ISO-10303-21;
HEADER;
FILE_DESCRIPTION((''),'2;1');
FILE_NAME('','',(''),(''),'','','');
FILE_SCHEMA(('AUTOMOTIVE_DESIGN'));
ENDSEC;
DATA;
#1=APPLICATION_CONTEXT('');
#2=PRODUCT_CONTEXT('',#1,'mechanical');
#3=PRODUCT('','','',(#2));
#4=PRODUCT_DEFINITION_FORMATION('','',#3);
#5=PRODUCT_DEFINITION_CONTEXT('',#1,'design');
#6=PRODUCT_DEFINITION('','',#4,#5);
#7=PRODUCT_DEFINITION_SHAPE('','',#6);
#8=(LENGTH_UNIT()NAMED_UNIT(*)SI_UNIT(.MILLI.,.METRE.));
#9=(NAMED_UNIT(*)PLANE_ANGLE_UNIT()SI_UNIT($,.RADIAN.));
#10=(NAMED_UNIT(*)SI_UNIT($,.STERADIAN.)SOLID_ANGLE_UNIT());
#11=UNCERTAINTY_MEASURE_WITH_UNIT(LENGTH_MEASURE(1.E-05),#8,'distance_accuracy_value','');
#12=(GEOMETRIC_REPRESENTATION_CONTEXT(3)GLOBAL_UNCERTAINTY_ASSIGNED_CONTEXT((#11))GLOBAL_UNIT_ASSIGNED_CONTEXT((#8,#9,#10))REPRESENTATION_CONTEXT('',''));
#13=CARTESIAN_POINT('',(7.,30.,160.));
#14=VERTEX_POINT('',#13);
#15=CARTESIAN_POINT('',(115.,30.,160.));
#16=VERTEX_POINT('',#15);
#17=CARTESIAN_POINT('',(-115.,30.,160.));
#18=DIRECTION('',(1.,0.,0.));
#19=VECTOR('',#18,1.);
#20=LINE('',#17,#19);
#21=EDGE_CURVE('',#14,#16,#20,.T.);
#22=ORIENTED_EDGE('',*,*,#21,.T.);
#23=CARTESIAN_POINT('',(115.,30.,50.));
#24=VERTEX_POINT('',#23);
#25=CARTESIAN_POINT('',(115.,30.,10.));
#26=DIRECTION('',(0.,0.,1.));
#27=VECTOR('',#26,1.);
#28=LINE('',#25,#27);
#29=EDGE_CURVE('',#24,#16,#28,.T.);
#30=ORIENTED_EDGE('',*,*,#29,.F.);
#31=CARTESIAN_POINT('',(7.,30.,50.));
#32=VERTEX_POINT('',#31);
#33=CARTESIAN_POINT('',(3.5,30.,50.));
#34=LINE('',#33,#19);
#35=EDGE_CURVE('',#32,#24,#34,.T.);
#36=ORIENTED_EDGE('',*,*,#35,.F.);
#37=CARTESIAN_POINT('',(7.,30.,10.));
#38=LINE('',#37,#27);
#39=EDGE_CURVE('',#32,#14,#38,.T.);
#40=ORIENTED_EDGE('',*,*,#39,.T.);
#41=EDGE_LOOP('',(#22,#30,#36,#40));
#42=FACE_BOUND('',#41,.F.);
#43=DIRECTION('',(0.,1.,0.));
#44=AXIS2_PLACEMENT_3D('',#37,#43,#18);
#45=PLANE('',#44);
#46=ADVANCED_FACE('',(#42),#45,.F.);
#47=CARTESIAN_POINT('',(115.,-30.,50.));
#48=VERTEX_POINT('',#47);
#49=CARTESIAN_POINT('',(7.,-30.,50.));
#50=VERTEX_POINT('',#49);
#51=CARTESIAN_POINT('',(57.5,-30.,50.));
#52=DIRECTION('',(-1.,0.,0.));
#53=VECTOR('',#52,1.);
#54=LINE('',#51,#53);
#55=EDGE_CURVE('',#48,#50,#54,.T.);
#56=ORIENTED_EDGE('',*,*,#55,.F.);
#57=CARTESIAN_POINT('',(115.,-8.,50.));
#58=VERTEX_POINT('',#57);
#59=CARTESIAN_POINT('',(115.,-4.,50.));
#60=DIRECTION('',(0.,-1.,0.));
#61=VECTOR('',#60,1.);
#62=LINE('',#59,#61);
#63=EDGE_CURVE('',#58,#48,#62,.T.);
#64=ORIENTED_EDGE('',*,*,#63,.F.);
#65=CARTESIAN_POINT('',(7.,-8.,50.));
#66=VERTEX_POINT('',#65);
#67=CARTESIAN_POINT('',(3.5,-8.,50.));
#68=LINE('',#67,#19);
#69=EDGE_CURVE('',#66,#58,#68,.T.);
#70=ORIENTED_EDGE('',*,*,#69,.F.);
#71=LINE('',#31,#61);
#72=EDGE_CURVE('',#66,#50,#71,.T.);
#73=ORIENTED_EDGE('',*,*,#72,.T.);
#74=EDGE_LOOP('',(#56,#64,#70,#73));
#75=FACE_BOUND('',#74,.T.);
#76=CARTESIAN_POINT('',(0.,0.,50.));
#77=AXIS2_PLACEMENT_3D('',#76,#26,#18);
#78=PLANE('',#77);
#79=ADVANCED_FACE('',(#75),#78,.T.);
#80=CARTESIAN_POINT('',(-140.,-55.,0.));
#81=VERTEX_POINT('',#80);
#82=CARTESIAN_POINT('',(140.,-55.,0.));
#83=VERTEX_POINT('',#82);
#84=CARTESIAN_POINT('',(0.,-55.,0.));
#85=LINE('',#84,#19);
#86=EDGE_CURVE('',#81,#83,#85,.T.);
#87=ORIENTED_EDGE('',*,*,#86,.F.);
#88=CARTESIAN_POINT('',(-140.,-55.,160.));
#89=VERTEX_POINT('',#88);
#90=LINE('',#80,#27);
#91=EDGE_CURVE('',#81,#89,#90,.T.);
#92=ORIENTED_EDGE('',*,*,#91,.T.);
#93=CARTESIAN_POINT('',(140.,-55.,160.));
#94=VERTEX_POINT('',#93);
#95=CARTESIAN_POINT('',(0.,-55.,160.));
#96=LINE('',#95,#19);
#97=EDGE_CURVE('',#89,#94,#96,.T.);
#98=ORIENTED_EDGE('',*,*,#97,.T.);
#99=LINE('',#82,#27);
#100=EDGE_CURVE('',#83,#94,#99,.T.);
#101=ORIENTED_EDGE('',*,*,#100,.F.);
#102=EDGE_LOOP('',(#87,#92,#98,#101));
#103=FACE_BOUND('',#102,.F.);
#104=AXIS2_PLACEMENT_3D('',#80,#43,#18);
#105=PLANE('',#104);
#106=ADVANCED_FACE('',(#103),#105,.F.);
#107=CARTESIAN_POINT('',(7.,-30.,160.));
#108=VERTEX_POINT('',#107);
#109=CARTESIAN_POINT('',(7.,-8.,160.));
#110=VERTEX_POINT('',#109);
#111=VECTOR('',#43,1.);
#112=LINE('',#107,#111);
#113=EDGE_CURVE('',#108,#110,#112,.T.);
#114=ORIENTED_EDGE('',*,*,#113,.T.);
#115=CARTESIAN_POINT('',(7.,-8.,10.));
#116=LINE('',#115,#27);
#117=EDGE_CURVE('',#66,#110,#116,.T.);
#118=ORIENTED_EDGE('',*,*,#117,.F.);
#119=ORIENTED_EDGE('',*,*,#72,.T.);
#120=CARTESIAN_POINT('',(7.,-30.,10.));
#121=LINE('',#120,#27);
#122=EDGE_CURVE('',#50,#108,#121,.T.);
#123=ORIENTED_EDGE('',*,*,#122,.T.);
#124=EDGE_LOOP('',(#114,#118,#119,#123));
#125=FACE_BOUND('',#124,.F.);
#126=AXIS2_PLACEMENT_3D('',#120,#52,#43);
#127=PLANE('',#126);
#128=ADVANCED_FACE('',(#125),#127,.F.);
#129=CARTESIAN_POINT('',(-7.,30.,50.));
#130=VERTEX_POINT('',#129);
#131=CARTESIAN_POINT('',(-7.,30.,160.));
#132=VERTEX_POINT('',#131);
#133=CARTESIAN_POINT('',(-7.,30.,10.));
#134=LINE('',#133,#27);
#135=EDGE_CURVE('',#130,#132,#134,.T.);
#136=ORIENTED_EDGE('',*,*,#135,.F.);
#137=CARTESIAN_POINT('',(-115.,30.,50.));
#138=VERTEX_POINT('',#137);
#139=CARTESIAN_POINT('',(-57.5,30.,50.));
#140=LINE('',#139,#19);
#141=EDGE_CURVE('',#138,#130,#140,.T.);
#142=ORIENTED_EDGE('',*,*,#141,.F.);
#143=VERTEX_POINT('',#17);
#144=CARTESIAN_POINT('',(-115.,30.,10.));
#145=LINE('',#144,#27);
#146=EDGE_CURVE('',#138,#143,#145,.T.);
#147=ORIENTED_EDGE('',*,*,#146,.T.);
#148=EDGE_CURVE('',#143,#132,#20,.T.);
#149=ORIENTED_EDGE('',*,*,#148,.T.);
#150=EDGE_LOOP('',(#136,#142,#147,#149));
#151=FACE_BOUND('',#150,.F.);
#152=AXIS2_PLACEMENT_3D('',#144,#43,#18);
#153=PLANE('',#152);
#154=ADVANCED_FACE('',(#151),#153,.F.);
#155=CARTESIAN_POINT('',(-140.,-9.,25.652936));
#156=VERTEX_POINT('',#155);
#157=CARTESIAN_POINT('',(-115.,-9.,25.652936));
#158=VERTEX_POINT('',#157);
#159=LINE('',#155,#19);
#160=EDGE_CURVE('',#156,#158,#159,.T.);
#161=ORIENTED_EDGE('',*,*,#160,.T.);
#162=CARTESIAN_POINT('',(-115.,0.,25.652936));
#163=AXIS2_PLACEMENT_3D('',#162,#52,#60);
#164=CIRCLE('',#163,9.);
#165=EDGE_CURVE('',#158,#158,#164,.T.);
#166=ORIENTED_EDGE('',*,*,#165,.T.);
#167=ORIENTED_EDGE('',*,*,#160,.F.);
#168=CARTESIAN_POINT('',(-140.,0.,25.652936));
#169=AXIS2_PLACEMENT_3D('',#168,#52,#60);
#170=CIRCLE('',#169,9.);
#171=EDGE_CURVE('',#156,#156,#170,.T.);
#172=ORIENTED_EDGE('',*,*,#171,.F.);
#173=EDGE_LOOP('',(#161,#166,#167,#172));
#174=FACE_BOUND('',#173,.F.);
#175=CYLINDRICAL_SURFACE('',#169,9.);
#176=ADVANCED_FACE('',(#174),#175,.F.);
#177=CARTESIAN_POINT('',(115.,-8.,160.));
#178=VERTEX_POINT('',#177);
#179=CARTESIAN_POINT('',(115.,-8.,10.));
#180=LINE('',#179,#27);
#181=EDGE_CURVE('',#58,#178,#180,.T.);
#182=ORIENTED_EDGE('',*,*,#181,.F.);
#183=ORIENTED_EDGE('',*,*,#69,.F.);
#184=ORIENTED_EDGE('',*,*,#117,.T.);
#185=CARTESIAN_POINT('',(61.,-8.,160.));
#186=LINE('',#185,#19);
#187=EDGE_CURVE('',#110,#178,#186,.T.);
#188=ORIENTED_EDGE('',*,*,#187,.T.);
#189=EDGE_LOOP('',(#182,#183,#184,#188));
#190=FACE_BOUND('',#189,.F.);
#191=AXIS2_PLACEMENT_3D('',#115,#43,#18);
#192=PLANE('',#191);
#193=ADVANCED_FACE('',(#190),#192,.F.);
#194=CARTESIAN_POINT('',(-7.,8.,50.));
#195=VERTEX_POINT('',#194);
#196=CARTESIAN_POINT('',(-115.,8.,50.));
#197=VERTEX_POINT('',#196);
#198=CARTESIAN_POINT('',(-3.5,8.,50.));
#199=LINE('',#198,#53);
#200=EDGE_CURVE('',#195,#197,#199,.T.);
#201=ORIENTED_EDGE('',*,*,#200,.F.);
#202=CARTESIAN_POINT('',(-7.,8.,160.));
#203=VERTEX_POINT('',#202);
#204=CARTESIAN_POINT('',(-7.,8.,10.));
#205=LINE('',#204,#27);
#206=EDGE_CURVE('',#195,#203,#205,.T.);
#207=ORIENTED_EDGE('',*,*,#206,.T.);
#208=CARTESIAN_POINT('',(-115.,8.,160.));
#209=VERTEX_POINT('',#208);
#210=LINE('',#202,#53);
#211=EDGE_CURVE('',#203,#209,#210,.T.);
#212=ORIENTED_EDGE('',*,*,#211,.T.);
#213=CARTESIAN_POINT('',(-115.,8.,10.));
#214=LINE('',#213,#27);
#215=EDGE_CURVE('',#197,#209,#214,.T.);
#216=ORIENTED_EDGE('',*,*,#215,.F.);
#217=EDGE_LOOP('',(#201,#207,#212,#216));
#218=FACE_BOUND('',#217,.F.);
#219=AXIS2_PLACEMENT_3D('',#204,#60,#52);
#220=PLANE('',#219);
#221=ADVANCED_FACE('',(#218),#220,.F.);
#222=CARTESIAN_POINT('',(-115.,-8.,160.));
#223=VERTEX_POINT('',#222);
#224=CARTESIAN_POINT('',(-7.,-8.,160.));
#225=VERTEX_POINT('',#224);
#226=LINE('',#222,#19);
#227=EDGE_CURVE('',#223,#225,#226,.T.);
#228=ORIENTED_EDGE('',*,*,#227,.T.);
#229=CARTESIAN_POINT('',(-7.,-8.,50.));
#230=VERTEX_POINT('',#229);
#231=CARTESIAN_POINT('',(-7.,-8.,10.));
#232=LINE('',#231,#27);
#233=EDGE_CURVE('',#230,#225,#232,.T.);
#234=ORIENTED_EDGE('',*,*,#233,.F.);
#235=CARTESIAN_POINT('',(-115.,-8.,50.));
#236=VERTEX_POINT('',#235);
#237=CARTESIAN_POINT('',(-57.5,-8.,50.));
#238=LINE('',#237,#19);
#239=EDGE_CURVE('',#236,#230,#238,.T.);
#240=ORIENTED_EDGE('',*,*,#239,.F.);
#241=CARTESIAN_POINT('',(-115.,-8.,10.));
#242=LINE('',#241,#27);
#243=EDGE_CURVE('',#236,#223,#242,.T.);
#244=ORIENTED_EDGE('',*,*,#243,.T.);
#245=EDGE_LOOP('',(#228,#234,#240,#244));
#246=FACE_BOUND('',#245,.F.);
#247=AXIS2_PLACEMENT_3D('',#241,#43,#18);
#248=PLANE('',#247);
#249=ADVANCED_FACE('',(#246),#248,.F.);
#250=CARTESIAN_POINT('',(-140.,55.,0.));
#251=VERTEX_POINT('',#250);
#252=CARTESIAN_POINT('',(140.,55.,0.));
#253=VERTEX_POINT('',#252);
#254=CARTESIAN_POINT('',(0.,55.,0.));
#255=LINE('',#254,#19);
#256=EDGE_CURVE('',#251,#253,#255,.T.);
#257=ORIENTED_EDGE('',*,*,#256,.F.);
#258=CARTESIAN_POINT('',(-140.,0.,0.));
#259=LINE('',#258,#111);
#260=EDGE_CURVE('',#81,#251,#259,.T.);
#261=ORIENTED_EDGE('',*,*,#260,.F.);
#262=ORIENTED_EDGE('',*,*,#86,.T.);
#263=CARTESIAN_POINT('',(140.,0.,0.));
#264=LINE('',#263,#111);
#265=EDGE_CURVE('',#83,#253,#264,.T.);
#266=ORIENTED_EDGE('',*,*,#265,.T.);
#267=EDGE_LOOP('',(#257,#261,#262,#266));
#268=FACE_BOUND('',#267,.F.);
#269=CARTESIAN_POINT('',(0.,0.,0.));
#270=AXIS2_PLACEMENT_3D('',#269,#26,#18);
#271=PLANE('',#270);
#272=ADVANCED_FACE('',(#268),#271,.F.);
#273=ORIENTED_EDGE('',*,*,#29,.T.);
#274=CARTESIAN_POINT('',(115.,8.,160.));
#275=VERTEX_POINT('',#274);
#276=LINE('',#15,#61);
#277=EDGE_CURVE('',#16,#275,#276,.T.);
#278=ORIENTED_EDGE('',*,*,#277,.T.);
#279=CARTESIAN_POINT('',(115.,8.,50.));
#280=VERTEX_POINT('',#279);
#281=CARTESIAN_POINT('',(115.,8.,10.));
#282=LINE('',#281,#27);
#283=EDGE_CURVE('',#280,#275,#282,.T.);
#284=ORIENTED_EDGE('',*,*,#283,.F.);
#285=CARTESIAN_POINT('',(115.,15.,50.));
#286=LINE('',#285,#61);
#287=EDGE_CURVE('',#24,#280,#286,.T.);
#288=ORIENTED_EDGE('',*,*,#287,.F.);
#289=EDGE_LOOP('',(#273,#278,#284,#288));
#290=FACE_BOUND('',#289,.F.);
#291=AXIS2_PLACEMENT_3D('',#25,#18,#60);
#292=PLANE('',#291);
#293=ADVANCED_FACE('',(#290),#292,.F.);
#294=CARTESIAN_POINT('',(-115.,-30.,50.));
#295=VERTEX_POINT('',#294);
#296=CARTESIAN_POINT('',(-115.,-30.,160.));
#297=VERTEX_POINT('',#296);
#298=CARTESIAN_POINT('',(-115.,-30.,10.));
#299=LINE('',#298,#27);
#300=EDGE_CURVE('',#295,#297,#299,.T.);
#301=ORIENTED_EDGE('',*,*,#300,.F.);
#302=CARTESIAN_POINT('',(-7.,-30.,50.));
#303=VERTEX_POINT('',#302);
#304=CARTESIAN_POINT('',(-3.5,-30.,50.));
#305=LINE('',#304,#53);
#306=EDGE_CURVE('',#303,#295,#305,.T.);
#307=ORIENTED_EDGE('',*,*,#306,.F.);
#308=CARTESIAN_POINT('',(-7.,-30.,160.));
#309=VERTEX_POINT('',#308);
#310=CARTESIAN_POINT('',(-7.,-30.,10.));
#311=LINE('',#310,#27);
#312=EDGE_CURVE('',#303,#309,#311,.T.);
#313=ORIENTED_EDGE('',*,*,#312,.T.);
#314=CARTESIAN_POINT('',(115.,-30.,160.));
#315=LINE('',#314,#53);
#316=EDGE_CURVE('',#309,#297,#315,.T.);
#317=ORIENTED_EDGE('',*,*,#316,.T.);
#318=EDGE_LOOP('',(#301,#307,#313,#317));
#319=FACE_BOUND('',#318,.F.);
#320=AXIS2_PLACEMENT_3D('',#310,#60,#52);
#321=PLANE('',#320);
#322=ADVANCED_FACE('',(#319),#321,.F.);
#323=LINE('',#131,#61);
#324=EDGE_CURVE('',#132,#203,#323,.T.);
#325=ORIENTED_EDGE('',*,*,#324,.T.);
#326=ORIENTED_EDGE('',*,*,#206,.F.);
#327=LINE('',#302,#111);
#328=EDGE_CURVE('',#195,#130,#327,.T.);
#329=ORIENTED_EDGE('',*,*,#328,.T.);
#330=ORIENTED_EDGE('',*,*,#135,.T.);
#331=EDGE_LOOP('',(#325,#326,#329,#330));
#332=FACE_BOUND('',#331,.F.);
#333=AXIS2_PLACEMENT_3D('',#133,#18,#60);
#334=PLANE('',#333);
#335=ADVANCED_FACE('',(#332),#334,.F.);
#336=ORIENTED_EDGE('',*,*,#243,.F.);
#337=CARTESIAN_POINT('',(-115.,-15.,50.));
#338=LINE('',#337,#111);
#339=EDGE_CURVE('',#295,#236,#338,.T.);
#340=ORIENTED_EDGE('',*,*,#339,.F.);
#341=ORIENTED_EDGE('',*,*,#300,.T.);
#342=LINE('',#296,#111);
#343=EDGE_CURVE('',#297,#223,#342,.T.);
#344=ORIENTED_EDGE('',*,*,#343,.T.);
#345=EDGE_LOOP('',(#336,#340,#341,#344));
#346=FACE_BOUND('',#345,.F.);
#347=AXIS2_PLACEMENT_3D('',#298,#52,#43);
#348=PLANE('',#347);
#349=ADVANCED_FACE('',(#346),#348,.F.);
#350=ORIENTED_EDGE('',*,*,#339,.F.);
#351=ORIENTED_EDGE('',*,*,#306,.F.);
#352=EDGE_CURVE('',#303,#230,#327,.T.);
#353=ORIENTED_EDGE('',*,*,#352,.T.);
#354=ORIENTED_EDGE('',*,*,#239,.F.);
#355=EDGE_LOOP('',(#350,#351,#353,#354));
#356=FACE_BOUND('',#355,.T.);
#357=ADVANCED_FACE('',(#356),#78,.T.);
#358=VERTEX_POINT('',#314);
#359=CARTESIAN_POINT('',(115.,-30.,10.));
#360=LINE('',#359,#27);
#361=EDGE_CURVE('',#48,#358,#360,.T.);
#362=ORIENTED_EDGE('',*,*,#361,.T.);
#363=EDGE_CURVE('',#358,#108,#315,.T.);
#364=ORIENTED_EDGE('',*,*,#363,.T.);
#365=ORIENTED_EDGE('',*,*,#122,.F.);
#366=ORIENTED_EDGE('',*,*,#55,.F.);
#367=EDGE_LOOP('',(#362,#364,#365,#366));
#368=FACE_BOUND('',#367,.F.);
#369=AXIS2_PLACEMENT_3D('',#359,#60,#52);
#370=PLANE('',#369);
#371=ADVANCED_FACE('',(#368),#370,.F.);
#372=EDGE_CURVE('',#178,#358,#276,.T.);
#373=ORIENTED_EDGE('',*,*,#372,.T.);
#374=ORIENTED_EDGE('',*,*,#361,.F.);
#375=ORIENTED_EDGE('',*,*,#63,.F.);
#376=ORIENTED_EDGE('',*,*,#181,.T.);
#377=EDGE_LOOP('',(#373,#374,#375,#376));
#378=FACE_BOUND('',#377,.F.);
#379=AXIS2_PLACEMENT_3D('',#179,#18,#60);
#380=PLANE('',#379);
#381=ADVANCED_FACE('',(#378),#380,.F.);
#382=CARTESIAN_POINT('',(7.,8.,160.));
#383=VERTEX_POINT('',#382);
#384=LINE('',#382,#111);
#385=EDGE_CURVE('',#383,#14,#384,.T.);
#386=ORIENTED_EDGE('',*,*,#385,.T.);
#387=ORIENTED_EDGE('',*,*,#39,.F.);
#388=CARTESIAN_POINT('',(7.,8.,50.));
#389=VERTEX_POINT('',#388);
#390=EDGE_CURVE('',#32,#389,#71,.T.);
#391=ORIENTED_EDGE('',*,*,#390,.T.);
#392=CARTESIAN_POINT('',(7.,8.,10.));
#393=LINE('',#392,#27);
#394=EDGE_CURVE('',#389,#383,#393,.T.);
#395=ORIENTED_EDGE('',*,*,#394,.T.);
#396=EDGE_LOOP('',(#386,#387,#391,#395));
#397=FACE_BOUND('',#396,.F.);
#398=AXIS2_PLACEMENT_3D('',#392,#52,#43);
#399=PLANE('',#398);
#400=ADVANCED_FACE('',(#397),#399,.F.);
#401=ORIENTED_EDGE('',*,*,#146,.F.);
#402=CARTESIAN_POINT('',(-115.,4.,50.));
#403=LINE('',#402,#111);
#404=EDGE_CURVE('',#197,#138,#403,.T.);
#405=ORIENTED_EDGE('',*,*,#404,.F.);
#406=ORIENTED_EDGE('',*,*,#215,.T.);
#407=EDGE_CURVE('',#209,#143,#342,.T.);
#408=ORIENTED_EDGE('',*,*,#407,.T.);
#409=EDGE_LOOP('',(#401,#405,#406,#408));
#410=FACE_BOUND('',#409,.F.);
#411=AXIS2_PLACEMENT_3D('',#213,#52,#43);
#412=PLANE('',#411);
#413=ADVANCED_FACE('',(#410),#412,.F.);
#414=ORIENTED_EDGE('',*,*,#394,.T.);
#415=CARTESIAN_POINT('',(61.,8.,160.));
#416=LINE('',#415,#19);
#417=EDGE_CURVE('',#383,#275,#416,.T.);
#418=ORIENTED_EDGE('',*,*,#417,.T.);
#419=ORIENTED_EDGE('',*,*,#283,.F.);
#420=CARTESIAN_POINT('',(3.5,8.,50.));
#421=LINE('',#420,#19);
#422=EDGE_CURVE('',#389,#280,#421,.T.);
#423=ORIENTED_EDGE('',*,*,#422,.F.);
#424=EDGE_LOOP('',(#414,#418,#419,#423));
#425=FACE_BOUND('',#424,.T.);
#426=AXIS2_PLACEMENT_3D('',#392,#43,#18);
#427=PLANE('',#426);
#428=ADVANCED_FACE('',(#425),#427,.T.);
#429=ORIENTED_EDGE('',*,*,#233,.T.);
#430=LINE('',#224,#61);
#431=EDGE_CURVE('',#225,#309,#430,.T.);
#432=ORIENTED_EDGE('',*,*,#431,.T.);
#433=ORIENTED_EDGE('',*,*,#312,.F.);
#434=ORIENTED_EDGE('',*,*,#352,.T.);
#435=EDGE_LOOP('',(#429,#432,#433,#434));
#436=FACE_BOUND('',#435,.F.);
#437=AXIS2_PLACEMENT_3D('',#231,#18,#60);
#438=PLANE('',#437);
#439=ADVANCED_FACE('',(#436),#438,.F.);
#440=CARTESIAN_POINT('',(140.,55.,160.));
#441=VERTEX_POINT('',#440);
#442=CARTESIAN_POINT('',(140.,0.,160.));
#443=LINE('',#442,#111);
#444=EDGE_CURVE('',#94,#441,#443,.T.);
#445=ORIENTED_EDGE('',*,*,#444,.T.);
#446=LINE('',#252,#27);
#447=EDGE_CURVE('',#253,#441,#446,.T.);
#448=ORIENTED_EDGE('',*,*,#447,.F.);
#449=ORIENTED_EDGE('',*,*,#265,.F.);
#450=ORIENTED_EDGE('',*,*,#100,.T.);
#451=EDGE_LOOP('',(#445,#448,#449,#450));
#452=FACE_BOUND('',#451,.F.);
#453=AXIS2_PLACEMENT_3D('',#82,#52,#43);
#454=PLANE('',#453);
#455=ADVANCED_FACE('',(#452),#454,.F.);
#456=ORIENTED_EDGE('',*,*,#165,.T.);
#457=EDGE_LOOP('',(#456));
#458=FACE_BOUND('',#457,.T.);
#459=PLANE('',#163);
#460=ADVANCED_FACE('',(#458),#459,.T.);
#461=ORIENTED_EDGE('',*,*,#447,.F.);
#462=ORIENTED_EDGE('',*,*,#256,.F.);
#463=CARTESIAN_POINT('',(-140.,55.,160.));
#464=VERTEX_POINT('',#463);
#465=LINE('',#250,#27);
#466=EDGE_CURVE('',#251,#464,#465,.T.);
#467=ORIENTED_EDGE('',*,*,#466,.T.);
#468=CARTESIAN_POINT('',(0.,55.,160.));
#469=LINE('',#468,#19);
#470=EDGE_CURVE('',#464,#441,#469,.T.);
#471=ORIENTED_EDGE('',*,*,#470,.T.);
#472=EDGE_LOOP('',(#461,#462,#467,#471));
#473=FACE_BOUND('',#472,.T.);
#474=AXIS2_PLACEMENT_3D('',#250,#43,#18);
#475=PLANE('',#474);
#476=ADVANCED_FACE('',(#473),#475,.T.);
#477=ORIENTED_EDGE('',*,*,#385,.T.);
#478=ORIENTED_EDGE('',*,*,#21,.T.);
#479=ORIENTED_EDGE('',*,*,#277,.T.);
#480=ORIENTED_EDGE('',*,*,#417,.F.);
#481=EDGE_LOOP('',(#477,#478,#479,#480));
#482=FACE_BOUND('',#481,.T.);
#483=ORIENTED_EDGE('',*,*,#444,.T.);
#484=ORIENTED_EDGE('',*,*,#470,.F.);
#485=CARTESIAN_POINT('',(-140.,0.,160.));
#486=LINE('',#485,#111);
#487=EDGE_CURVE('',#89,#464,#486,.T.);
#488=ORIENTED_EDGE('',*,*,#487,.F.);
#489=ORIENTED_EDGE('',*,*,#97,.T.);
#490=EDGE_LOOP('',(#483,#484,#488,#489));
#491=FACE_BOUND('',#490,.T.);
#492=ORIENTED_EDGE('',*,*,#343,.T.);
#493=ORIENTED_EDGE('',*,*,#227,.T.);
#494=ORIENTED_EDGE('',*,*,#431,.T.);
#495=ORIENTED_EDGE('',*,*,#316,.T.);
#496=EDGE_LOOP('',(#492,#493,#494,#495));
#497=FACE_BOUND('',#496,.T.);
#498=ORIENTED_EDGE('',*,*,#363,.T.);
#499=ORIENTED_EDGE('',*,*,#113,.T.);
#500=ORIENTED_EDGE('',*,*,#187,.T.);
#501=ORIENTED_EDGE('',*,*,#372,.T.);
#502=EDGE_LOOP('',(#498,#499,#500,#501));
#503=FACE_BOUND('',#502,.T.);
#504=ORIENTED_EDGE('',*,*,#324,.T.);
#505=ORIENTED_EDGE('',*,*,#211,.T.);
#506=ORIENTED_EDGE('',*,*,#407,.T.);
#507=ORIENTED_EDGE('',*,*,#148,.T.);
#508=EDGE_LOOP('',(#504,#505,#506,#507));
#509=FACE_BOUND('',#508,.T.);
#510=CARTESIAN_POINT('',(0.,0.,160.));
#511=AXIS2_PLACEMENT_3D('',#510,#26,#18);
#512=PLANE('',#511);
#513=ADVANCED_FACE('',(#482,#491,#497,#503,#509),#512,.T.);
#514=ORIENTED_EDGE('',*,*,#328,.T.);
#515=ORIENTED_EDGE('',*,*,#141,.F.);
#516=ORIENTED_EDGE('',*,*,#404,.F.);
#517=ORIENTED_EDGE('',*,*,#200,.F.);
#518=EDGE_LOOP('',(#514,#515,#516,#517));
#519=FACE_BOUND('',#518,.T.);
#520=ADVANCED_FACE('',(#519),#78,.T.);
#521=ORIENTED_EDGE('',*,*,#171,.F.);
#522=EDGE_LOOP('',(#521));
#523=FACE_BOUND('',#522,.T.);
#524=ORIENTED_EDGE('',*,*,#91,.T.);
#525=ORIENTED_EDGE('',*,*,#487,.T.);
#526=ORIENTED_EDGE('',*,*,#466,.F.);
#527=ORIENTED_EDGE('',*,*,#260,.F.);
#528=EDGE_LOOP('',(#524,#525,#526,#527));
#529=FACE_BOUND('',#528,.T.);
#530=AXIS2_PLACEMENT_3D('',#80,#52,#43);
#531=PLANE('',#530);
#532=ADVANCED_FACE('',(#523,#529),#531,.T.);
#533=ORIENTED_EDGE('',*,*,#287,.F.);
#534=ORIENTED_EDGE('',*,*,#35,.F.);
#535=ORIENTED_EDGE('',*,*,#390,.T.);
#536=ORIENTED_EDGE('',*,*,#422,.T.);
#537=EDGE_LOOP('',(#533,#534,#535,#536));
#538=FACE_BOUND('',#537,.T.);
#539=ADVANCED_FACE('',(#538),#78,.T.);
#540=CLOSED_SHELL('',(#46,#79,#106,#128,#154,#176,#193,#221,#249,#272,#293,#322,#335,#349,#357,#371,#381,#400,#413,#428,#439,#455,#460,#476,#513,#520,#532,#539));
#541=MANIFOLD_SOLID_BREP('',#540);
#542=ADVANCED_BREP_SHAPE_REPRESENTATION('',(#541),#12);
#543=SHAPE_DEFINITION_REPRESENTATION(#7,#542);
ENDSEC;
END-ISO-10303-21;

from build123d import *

# Parameters (mm, degrees)
F0_W     = 280
F0_H     = 110
F1_DEPTH = 160
F2_T     = -10
F3_W     = 260
F3_H     = 90
F3_W_2   = 108
F3_H_2   = 16
F3_W_3   = 14
F4_DEPTH = 150
F5_DEPTH = 40
F6_R     = 9
F7_DEPTH = 25


with BuildPart() as f1:
    # F0 (on Top) → F1 (new body)
    with BuildSketch(Plane.XY):
        Rectangle(F0_W, F0_H)
    extrude(amount=F1_DEPTH)

    # F2
    f2_openings = [f1.faces().sort_by_distance(p)[0] for p in [
        (0, 0, 160),
    ]]
    offset(amount=F2_T, openings=f2_openings)

    # F3 (on face) → F4 (join)
    with BuildSketch(Plane.XY.offset(10)):
        Rectangle(F3_W, F3_H)
        Polygon((115, 30), (115, 24.33777228), (115, 8), (115, -8), (115, -26.8225744367), (115, -30), (7, -30), (-7, -30), (-115, -30), (-115, -8), (-115, 8), (-115, 30), (-15, 30), (-7, 30), (7, 30), align=None, mode=Mode.SUBTRACT)
        with Locations((61, 0)):
            Rectangle(F3_W_2, F3_H_2)
        Polygon((-7, -8), (-7, 8), (-109.6588596702, 8), (-115, 8), (-115, -8), (-109.6588596702, -8), align=None)
        Polygon((-7, 8), (7, 8), (7, 30), (-7, 30), (-7, 15.2422059327), align=None)
        Polygon((7, -16.3514893502), (7, -8), (-7, -8), (-7, -30), (7, -30), align=None)
        Rectangle(F3_W_3, F3_H_2)
    extrude(amount=F4_DEPTH)

    # F3 (on face) → F5 (join)
    with BuildSketch(Plane.XY.offset(10)):
        Rectangle(F3_W, F3_H)
        Polygon((115, 30), (115, 24.33777228), (115, 8), (115, -8), (115, -26.8225744367), (115, -30), (7, -30), (-7, -30), (-115, -30), (-115, -8), (-115, 8), (-115, 30), (-15, 30), (-7, 30), (7, 30), align=None, mode=Mode.SUBTRACT)
        Polygon((115, 8), (115, 24.33777228), (115, 30), (7, 30), (7, 8), align=None)
        Polygon((115, -26.8225744367), (115, -8), (7, -8), (7, -16.3514893502), (7, -30), (115, -30), align=None)
        Polygon((-109.6588596702, 8), (-7, 8), (-7, 15.2422059327), (-7, 30), (-15, 30), (-115, 30), (-115, 8), align=None)
        Polygon((-7, -30), (-7, -8), (-109.6588596702, -8), (-115, -8), (-115, -30), align=None)
        with Locations((61, 0)):
            Rectangle(F3_W_2, F3_H_2)
        Polygon((-7, -8), (-7, 8), (-109.6588596702, 8), (-115, 8), (-115, -8), (-109.6588596702, -8), align=None)
        Rectangle(F3_W_3, F3_H_2)
    extrude(amount=F5_DEPTH)

    # F6 (on face) → F7 (cut)
    with BuildSketch(Plane(origin=(-140, 0, 0), x_dir=(0, -1, 0), z_dir=(-1, 0, 0))):
        with Locations((0, 25.6529357284)):
            Circle(F6_R)
    extrude(amount=-F7_DEPTH, mode=Mode.SUBTRACT)


solid = f1.part
